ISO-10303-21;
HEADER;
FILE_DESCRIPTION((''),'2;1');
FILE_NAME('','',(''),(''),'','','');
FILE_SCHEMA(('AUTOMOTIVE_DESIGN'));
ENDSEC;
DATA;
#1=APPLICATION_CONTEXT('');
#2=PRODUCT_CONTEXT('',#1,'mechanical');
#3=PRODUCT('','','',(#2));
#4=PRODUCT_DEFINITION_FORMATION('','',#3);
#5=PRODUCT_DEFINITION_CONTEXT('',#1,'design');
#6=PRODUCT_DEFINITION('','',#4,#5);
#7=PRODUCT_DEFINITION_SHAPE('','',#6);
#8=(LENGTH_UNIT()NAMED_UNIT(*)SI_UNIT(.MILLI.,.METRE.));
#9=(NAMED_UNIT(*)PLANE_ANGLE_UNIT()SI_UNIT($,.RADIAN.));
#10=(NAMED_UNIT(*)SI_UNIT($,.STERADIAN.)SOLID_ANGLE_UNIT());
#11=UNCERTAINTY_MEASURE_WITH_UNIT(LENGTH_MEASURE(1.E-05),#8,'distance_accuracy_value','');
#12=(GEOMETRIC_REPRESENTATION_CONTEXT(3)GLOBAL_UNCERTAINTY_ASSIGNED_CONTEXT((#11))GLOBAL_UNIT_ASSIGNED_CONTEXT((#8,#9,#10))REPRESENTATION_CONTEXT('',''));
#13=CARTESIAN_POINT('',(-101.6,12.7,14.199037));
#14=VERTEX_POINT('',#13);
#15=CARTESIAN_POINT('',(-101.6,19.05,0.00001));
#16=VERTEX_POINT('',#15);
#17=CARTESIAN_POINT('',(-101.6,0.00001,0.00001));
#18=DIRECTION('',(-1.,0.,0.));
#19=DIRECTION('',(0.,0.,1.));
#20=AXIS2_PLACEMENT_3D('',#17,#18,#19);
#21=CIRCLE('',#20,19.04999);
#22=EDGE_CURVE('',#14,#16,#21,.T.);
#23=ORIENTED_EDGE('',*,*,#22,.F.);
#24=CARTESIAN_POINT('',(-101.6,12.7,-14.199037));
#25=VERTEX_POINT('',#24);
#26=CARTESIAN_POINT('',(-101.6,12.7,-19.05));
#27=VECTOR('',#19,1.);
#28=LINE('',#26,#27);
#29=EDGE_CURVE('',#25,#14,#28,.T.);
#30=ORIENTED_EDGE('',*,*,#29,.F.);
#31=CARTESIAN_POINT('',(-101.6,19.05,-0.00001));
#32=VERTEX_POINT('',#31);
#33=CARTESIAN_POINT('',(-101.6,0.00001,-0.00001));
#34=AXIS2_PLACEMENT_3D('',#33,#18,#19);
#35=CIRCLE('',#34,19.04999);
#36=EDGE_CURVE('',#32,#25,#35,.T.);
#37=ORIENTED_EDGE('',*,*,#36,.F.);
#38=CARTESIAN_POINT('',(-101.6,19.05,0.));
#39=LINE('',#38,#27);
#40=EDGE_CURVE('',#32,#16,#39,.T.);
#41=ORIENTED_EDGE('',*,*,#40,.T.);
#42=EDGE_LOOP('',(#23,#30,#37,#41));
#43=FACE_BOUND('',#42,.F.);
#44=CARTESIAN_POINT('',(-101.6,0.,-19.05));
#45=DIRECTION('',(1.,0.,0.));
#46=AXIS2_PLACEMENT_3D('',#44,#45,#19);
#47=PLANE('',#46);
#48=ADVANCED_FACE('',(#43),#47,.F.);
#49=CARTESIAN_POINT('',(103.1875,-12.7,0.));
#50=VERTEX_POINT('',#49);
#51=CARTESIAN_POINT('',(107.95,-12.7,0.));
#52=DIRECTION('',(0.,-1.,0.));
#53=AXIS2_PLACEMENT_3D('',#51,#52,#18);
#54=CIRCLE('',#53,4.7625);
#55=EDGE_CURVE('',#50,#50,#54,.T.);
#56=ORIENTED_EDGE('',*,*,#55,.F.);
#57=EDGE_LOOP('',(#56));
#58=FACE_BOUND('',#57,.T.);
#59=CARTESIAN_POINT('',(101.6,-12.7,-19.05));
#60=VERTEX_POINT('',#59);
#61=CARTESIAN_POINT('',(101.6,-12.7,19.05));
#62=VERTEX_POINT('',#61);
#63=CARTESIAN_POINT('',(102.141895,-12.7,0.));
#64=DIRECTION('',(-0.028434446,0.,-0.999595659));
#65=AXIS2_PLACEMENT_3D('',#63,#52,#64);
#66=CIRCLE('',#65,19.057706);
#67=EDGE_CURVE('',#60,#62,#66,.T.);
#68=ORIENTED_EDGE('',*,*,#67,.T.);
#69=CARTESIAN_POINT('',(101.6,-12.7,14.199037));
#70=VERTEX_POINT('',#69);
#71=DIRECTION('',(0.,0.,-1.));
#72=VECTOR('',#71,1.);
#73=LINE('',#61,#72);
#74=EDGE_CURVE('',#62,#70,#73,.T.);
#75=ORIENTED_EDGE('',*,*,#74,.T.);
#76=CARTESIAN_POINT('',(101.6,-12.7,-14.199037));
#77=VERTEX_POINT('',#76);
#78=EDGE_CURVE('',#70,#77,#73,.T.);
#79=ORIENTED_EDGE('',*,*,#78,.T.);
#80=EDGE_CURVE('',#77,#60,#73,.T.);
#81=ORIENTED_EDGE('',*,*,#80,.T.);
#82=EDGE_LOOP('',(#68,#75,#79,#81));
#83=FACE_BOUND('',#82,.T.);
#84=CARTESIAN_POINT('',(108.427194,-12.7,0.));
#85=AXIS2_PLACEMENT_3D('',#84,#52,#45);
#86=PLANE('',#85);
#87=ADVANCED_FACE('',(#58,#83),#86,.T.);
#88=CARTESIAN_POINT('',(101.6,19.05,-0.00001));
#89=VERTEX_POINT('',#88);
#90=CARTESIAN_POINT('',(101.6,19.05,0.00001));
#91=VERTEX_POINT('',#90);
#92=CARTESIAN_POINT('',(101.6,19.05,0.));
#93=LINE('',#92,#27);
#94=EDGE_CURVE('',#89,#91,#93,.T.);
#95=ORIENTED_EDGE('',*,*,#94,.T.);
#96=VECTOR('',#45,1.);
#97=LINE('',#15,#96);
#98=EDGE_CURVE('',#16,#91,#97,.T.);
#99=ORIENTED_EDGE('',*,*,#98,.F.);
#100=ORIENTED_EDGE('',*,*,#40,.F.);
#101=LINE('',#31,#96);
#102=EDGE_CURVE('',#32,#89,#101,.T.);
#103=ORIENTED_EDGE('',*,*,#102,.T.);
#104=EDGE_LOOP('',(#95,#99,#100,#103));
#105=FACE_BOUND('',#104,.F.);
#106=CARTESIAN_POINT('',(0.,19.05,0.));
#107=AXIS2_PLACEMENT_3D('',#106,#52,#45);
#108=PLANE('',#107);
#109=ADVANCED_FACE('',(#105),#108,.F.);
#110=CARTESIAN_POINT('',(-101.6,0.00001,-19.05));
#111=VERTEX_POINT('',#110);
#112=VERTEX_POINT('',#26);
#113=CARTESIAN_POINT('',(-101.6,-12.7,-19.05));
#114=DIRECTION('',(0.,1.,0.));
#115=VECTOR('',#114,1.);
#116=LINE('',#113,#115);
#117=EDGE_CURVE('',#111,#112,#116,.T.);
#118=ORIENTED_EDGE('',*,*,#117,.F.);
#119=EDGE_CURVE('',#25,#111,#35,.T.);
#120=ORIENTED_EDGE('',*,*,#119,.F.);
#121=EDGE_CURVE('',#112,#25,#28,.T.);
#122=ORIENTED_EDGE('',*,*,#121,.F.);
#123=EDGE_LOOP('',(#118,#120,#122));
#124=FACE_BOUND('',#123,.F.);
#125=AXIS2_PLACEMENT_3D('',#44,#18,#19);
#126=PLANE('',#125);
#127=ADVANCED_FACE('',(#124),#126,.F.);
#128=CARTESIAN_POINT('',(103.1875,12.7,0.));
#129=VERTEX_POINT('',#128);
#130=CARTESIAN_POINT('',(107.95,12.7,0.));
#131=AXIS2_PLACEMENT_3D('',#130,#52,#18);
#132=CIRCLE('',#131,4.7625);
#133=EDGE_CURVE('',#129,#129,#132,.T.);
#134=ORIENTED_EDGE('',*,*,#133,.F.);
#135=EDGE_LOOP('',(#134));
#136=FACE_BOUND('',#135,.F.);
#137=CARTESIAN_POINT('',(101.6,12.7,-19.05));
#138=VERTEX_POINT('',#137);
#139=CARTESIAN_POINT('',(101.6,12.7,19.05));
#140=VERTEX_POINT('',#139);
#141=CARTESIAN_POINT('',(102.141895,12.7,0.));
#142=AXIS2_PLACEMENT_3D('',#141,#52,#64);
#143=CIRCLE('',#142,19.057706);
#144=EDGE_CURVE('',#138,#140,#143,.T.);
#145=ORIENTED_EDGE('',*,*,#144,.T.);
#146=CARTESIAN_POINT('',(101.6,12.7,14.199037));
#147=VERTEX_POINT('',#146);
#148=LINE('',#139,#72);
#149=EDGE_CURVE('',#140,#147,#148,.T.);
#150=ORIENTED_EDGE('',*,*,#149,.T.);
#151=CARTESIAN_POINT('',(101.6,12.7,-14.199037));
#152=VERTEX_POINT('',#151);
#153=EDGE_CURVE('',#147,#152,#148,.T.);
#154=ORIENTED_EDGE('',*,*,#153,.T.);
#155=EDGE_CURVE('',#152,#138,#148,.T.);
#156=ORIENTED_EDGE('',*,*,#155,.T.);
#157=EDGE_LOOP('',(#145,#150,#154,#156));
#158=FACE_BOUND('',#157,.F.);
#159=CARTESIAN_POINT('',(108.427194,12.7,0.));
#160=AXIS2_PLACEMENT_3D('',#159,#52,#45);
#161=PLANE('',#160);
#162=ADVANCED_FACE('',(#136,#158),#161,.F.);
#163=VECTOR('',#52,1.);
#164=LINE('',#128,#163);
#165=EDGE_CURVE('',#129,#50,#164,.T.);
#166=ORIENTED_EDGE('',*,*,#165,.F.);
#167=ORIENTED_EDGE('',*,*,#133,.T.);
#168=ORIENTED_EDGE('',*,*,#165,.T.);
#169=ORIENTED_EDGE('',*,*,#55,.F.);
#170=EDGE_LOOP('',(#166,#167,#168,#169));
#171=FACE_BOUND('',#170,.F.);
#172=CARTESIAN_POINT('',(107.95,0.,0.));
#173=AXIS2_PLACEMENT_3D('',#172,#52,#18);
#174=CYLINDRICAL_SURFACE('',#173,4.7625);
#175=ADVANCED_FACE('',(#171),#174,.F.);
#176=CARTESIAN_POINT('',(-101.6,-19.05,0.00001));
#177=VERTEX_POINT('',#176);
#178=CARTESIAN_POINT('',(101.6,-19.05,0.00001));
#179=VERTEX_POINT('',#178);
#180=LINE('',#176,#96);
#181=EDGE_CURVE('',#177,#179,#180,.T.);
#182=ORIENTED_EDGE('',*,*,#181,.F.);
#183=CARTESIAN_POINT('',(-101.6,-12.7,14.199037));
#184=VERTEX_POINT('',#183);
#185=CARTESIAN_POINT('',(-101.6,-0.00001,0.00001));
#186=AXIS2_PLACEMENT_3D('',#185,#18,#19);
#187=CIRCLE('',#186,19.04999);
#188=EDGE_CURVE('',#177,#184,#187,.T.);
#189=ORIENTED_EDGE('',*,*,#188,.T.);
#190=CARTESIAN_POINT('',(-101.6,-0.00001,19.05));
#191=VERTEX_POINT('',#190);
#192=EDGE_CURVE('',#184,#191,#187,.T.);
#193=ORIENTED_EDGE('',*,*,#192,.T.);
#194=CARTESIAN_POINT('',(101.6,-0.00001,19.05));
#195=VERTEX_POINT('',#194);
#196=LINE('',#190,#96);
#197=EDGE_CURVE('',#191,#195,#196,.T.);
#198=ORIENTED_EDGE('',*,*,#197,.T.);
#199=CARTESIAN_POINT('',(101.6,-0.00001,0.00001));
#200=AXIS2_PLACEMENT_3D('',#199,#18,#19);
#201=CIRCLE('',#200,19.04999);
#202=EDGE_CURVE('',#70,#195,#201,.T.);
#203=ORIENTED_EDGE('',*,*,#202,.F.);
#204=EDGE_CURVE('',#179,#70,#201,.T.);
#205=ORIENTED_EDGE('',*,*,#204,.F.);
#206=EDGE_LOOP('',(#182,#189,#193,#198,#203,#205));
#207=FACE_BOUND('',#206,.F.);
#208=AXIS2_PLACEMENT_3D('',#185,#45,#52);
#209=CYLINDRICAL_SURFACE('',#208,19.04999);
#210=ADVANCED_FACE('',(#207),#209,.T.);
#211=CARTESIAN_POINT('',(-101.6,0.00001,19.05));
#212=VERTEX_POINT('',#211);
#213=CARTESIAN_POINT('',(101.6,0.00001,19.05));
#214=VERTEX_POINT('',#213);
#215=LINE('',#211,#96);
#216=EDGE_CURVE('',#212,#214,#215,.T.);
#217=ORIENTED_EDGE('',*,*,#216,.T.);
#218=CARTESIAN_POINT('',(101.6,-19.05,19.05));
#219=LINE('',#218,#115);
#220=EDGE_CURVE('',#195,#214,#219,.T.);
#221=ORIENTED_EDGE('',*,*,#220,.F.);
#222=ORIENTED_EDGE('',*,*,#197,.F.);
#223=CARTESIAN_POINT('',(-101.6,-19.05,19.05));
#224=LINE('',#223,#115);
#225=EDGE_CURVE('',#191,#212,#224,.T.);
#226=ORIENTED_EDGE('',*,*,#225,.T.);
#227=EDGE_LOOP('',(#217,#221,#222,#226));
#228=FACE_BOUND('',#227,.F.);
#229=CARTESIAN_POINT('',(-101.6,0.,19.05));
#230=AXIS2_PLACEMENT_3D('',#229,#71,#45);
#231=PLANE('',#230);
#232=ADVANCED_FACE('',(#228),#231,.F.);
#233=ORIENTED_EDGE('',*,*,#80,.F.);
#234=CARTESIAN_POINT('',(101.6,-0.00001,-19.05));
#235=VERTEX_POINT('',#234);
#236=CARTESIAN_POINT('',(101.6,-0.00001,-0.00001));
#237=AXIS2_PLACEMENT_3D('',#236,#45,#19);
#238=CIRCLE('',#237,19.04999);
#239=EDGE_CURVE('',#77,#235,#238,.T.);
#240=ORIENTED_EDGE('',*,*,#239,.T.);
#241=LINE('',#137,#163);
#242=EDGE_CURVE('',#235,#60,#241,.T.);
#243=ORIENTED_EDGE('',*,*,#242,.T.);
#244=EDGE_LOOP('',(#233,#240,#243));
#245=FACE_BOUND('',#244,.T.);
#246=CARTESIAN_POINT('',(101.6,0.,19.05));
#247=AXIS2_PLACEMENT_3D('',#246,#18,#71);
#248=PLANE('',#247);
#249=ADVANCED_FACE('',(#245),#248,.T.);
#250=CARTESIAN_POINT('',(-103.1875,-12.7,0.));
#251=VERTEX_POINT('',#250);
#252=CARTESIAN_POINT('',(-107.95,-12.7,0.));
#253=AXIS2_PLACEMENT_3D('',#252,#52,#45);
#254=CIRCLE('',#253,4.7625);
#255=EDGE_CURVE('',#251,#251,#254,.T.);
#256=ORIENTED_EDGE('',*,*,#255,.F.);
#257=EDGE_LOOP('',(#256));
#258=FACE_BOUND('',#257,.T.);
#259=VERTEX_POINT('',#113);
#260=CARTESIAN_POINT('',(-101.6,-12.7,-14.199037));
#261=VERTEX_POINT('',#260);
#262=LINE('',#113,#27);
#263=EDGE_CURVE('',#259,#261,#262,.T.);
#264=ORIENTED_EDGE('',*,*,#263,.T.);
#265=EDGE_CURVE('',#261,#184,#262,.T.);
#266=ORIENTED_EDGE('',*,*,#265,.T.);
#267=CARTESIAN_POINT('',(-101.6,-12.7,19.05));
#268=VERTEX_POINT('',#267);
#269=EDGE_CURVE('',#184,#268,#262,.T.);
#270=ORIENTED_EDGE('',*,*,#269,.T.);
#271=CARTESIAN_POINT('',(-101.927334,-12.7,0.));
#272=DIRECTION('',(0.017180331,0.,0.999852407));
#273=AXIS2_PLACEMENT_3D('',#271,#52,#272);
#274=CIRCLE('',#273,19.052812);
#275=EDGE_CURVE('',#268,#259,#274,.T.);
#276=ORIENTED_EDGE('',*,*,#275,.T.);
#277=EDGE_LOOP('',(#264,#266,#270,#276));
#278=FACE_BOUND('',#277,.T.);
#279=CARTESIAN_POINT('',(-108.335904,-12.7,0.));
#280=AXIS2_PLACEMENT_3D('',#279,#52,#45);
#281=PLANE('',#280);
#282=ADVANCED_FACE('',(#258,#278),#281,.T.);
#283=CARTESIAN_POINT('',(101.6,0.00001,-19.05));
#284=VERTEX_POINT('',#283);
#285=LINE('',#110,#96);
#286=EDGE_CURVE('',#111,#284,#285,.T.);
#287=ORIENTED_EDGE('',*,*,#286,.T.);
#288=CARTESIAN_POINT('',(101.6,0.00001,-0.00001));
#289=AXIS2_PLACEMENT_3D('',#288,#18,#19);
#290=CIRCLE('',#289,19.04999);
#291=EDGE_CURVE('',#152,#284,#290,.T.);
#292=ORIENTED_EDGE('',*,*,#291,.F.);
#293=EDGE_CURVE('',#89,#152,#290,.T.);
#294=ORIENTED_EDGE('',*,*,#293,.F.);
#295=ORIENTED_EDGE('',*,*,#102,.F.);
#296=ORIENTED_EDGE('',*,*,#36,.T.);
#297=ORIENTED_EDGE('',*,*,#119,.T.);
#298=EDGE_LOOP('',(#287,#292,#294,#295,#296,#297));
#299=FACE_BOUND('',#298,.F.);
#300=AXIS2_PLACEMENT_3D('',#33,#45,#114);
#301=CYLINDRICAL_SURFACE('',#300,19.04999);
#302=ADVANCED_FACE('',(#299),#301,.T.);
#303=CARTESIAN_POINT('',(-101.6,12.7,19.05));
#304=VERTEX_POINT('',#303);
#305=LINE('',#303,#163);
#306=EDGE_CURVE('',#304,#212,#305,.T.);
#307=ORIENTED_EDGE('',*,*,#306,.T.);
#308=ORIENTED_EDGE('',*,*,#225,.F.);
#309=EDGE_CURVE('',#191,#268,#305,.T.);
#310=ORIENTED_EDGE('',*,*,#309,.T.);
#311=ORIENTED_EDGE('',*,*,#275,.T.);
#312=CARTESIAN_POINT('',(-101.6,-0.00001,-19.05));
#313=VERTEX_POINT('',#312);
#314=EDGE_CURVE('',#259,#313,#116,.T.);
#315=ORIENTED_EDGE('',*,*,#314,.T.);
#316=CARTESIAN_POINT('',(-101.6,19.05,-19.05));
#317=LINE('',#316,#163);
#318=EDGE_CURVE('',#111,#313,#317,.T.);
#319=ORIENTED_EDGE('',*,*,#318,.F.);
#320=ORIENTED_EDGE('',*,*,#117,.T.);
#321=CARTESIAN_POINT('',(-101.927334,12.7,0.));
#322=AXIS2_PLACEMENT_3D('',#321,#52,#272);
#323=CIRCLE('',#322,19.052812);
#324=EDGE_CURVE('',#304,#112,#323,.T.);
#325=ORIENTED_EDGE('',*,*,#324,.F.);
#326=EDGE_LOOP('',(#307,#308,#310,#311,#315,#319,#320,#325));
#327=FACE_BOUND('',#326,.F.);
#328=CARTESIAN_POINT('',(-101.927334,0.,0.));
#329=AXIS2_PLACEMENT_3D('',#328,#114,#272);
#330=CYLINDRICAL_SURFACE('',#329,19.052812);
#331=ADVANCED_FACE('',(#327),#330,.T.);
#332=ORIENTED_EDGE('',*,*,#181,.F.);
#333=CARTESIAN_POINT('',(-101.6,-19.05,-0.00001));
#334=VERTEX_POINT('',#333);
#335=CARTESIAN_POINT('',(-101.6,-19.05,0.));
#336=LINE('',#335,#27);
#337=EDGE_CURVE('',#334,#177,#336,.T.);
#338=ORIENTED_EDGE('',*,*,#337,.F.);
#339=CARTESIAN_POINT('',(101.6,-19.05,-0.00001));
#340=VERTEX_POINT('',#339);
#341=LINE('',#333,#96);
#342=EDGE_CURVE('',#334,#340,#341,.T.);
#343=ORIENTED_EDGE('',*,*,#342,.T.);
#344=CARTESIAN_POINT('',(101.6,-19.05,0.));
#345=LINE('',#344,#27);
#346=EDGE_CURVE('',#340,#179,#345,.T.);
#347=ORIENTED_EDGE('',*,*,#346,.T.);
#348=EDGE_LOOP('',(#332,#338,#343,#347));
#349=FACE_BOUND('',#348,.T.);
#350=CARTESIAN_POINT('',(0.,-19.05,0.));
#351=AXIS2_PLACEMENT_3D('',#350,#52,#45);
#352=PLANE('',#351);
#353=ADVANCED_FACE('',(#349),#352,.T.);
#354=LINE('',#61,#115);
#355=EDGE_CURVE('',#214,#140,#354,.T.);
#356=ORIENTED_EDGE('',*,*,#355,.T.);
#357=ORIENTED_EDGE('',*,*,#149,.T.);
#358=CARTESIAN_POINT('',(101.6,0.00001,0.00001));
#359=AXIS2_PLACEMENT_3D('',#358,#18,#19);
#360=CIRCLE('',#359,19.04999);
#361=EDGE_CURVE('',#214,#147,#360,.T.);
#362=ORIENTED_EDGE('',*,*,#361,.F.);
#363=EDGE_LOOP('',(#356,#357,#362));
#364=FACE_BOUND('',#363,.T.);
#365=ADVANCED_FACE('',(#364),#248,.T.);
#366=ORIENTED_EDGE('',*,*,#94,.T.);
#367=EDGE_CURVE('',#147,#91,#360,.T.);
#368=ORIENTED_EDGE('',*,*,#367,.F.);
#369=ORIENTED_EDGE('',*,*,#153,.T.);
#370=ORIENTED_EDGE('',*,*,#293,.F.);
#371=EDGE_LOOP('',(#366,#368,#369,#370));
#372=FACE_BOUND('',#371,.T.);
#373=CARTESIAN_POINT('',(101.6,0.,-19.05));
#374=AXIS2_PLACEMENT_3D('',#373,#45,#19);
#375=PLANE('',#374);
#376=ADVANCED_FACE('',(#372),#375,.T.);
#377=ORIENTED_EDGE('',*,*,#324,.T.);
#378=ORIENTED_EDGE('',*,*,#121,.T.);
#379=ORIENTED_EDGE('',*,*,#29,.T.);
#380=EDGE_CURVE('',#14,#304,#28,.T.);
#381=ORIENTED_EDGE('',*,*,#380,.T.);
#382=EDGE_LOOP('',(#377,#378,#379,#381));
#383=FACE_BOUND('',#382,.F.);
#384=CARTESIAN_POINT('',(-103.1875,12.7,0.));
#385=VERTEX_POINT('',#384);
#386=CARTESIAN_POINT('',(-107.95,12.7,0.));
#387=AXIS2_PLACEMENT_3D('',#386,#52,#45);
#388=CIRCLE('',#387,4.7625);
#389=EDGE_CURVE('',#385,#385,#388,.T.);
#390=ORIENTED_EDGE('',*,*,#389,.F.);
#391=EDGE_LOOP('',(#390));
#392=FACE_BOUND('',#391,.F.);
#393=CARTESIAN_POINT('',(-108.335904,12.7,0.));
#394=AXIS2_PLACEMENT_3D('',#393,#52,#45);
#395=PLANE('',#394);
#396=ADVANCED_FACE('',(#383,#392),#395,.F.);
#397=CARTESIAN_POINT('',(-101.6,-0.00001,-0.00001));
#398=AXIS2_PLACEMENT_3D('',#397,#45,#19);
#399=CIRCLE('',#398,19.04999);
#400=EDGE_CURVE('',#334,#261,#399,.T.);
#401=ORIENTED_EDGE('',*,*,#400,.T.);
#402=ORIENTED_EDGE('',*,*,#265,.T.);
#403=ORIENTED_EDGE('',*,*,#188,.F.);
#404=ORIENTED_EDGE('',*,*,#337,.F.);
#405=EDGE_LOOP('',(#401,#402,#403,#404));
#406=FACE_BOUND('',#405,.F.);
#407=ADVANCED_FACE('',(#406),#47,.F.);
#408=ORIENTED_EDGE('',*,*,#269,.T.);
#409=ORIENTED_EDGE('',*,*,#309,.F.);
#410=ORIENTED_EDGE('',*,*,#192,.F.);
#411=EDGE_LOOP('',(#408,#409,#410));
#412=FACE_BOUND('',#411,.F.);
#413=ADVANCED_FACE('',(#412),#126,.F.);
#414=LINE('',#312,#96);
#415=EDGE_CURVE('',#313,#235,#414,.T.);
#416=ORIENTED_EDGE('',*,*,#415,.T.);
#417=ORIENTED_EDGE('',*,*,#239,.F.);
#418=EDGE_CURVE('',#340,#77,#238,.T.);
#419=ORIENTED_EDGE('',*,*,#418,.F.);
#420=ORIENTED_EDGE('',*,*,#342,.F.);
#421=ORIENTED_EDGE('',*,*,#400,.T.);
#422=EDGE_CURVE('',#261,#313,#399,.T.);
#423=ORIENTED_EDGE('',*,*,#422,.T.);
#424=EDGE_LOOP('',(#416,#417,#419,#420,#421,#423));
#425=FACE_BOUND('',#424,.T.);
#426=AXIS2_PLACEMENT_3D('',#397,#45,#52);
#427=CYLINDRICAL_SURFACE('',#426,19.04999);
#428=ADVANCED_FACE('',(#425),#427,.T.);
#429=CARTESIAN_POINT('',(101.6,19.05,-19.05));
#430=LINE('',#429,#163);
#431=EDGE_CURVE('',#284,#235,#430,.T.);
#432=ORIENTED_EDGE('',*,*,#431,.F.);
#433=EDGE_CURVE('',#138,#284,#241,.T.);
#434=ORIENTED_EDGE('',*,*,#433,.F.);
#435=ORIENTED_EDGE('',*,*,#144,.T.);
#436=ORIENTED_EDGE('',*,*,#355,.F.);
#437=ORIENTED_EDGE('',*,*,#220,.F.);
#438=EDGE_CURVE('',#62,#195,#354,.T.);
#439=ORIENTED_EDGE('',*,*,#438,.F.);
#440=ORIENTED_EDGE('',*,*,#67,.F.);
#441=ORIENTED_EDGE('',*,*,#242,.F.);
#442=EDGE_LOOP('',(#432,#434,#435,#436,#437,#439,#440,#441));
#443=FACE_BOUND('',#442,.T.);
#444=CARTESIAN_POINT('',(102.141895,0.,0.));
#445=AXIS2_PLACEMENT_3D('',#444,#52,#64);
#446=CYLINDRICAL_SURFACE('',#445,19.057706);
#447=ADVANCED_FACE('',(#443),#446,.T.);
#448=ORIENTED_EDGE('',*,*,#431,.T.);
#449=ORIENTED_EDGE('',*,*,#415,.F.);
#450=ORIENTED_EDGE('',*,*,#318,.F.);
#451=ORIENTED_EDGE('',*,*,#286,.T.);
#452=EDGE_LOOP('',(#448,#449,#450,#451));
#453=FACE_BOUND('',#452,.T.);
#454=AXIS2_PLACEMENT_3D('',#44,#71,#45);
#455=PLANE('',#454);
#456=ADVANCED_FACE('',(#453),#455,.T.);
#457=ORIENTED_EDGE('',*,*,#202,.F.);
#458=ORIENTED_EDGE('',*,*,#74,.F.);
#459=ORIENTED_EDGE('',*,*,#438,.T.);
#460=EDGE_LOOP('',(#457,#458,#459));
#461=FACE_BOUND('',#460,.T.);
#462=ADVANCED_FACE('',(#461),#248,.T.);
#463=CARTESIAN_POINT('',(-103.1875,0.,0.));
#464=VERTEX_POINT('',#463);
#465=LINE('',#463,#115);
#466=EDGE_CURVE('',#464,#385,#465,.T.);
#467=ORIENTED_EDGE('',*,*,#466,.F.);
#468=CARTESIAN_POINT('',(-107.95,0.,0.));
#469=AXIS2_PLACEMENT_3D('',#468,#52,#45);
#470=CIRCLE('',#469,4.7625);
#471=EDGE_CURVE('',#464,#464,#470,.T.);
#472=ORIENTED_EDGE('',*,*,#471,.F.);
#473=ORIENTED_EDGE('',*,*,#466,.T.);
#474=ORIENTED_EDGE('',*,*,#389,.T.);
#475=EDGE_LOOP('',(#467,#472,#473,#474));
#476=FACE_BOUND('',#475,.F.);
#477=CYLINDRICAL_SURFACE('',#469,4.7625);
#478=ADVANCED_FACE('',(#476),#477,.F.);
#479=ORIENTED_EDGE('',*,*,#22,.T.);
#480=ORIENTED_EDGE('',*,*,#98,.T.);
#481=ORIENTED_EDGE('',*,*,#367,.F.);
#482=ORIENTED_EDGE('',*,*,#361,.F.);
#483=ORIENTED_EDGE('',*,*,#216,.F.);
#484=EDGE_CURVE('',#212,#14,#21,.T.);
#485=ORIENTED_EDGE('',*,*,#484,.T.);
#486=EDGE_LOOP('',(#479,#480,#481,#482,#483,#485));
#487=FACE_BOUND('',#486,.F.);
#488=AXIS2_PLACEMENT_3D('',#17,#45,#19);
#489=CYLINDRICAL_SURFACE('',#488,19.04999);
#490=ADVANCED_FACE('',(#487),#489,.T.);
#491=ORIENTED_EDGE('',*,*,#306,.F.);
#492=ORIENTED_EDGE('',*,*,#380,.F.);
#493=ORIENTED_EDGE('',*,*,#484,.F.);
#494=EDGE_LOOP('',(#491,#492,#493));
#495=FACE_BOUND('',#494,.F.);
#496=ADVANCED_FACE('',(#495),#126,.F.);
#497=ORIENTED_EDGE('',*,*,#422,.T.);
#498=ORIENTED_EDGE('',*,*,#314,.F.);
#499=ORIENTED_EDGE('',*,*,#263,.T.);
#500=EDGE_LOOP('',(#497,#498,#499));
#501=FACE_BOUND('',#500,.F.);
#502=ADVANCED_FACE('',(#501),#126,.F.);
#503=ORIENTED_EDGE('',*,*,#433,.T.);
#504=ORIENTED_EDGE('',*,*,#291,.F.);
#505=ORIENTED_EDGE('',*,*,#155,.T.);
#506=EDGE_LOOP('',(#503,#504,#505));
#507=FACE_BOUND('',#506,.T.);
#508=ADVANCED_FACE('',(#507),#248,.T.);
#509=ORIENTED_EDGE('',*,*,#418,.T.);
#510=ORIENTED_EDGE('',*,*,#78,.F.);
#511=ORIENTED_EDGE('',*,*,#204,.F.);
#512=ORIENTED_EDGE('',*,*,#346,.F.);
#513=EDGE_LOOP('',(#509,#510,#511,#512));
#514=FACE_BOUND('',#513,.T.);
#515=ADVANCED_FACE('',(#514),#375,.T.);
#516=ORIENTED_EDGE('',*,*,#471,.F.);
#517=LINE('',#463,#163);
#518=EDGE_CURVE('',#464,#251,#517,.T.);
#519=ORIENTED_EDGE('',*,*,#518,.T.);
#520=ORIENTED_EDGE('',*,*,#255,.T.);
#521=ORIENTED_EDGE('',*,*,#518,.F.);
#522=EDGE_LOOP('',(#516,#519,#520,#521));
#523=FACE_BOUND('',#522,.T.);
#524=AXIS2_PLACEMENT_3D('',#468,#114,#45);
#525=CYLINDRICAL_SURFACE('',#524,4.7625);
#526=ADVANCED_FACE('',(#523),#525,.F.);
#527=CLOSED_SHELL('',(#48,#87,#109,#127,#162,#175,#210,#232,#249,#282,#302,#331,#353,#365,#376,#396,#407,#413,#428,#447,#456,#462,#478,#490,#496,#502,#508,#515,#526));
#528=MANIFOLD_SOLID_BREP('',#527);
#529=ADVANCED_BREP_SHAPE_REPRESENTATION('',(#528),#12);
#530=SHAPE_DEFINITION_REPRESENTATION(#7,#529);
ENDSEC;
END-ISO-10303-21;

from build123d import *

# Parameters (mm, degrees)
F0_W     = 203.2
F0_H     = 38.1
F1_DEPTH = 19.05
F2_R     = 19.04999
F4_DEPTH = 12.7
F5_R     = 4.7625
F6_DEPTH = 12.7


# Not quite as in the source:
# - a fillet or chamfer is up to 0.001 mm smaller than in the source, because OpenCascade refuses the exact size


with BuildPart() as f1:
    # F0 (on Front) → F1 (new body, symmetric)
    with BuildSketch(Plane.XZ):
        Rectangle(F0_W, F0_H)
    extrude(amount=F1_DEPTH, both=True)

    # F2 (radius 19.05 in the source; OpenCascade refuses exactly that, so slightly less here)
    f2_edges = [f1.edges().sort_by_distance(p)[0] for p in [
        (0, -19.05, 19.05),
        (0, 19.05, 19.05),
        (0, 19.05, -19.05),
        (0, -19.05, -19.05),
    ]]
    fillet(f2_edges, radius=F2_R)

    # F3 (on Front) → F4 (join, symmetric)
    with BuildSketch(Plane.XZ):
        with BuildLine():
            Line((-101.6, -19.0500002354), (-101.6, 0))
            Line((-101.6, 0), (-101.6, 19.05))
            ThreePointArc((-101.6, 19.05), (-120.9801457995, -1.177e-07), (-101.6, -19.0500002354))
        make_face()
        with BuildLine():
            Line((101.6, 19.05), (101.6, 0))
            Line((101.6, 0), (101.6, -19.0500002354))
            ThreePointArc((101.6, -19.0500002354), (121.1996012404, -1.177e-07), (101.6, 19.05))
        make_face()
    extrude(amount=F4_DEPTH, both=True)

    # F5 (on Front) → F6 (cut, symmetric)
    with BuildSketch(Plane.XZ):
        with Locations((-107.95, 0)):
            Circle(F5_R)
        with BuildLine():
            ThreePointArc((112.7125, 0), (107.95, 4.7625), (103.1875, 0))
            ThreePointArc((103.1875, 0), (107.95, -4.7625), (112.7125, 0))
        make_face()
    extrude(amount=F6_DEPTH, both=True, mode=Mode.SUBTRACT)


solid = f1.part
